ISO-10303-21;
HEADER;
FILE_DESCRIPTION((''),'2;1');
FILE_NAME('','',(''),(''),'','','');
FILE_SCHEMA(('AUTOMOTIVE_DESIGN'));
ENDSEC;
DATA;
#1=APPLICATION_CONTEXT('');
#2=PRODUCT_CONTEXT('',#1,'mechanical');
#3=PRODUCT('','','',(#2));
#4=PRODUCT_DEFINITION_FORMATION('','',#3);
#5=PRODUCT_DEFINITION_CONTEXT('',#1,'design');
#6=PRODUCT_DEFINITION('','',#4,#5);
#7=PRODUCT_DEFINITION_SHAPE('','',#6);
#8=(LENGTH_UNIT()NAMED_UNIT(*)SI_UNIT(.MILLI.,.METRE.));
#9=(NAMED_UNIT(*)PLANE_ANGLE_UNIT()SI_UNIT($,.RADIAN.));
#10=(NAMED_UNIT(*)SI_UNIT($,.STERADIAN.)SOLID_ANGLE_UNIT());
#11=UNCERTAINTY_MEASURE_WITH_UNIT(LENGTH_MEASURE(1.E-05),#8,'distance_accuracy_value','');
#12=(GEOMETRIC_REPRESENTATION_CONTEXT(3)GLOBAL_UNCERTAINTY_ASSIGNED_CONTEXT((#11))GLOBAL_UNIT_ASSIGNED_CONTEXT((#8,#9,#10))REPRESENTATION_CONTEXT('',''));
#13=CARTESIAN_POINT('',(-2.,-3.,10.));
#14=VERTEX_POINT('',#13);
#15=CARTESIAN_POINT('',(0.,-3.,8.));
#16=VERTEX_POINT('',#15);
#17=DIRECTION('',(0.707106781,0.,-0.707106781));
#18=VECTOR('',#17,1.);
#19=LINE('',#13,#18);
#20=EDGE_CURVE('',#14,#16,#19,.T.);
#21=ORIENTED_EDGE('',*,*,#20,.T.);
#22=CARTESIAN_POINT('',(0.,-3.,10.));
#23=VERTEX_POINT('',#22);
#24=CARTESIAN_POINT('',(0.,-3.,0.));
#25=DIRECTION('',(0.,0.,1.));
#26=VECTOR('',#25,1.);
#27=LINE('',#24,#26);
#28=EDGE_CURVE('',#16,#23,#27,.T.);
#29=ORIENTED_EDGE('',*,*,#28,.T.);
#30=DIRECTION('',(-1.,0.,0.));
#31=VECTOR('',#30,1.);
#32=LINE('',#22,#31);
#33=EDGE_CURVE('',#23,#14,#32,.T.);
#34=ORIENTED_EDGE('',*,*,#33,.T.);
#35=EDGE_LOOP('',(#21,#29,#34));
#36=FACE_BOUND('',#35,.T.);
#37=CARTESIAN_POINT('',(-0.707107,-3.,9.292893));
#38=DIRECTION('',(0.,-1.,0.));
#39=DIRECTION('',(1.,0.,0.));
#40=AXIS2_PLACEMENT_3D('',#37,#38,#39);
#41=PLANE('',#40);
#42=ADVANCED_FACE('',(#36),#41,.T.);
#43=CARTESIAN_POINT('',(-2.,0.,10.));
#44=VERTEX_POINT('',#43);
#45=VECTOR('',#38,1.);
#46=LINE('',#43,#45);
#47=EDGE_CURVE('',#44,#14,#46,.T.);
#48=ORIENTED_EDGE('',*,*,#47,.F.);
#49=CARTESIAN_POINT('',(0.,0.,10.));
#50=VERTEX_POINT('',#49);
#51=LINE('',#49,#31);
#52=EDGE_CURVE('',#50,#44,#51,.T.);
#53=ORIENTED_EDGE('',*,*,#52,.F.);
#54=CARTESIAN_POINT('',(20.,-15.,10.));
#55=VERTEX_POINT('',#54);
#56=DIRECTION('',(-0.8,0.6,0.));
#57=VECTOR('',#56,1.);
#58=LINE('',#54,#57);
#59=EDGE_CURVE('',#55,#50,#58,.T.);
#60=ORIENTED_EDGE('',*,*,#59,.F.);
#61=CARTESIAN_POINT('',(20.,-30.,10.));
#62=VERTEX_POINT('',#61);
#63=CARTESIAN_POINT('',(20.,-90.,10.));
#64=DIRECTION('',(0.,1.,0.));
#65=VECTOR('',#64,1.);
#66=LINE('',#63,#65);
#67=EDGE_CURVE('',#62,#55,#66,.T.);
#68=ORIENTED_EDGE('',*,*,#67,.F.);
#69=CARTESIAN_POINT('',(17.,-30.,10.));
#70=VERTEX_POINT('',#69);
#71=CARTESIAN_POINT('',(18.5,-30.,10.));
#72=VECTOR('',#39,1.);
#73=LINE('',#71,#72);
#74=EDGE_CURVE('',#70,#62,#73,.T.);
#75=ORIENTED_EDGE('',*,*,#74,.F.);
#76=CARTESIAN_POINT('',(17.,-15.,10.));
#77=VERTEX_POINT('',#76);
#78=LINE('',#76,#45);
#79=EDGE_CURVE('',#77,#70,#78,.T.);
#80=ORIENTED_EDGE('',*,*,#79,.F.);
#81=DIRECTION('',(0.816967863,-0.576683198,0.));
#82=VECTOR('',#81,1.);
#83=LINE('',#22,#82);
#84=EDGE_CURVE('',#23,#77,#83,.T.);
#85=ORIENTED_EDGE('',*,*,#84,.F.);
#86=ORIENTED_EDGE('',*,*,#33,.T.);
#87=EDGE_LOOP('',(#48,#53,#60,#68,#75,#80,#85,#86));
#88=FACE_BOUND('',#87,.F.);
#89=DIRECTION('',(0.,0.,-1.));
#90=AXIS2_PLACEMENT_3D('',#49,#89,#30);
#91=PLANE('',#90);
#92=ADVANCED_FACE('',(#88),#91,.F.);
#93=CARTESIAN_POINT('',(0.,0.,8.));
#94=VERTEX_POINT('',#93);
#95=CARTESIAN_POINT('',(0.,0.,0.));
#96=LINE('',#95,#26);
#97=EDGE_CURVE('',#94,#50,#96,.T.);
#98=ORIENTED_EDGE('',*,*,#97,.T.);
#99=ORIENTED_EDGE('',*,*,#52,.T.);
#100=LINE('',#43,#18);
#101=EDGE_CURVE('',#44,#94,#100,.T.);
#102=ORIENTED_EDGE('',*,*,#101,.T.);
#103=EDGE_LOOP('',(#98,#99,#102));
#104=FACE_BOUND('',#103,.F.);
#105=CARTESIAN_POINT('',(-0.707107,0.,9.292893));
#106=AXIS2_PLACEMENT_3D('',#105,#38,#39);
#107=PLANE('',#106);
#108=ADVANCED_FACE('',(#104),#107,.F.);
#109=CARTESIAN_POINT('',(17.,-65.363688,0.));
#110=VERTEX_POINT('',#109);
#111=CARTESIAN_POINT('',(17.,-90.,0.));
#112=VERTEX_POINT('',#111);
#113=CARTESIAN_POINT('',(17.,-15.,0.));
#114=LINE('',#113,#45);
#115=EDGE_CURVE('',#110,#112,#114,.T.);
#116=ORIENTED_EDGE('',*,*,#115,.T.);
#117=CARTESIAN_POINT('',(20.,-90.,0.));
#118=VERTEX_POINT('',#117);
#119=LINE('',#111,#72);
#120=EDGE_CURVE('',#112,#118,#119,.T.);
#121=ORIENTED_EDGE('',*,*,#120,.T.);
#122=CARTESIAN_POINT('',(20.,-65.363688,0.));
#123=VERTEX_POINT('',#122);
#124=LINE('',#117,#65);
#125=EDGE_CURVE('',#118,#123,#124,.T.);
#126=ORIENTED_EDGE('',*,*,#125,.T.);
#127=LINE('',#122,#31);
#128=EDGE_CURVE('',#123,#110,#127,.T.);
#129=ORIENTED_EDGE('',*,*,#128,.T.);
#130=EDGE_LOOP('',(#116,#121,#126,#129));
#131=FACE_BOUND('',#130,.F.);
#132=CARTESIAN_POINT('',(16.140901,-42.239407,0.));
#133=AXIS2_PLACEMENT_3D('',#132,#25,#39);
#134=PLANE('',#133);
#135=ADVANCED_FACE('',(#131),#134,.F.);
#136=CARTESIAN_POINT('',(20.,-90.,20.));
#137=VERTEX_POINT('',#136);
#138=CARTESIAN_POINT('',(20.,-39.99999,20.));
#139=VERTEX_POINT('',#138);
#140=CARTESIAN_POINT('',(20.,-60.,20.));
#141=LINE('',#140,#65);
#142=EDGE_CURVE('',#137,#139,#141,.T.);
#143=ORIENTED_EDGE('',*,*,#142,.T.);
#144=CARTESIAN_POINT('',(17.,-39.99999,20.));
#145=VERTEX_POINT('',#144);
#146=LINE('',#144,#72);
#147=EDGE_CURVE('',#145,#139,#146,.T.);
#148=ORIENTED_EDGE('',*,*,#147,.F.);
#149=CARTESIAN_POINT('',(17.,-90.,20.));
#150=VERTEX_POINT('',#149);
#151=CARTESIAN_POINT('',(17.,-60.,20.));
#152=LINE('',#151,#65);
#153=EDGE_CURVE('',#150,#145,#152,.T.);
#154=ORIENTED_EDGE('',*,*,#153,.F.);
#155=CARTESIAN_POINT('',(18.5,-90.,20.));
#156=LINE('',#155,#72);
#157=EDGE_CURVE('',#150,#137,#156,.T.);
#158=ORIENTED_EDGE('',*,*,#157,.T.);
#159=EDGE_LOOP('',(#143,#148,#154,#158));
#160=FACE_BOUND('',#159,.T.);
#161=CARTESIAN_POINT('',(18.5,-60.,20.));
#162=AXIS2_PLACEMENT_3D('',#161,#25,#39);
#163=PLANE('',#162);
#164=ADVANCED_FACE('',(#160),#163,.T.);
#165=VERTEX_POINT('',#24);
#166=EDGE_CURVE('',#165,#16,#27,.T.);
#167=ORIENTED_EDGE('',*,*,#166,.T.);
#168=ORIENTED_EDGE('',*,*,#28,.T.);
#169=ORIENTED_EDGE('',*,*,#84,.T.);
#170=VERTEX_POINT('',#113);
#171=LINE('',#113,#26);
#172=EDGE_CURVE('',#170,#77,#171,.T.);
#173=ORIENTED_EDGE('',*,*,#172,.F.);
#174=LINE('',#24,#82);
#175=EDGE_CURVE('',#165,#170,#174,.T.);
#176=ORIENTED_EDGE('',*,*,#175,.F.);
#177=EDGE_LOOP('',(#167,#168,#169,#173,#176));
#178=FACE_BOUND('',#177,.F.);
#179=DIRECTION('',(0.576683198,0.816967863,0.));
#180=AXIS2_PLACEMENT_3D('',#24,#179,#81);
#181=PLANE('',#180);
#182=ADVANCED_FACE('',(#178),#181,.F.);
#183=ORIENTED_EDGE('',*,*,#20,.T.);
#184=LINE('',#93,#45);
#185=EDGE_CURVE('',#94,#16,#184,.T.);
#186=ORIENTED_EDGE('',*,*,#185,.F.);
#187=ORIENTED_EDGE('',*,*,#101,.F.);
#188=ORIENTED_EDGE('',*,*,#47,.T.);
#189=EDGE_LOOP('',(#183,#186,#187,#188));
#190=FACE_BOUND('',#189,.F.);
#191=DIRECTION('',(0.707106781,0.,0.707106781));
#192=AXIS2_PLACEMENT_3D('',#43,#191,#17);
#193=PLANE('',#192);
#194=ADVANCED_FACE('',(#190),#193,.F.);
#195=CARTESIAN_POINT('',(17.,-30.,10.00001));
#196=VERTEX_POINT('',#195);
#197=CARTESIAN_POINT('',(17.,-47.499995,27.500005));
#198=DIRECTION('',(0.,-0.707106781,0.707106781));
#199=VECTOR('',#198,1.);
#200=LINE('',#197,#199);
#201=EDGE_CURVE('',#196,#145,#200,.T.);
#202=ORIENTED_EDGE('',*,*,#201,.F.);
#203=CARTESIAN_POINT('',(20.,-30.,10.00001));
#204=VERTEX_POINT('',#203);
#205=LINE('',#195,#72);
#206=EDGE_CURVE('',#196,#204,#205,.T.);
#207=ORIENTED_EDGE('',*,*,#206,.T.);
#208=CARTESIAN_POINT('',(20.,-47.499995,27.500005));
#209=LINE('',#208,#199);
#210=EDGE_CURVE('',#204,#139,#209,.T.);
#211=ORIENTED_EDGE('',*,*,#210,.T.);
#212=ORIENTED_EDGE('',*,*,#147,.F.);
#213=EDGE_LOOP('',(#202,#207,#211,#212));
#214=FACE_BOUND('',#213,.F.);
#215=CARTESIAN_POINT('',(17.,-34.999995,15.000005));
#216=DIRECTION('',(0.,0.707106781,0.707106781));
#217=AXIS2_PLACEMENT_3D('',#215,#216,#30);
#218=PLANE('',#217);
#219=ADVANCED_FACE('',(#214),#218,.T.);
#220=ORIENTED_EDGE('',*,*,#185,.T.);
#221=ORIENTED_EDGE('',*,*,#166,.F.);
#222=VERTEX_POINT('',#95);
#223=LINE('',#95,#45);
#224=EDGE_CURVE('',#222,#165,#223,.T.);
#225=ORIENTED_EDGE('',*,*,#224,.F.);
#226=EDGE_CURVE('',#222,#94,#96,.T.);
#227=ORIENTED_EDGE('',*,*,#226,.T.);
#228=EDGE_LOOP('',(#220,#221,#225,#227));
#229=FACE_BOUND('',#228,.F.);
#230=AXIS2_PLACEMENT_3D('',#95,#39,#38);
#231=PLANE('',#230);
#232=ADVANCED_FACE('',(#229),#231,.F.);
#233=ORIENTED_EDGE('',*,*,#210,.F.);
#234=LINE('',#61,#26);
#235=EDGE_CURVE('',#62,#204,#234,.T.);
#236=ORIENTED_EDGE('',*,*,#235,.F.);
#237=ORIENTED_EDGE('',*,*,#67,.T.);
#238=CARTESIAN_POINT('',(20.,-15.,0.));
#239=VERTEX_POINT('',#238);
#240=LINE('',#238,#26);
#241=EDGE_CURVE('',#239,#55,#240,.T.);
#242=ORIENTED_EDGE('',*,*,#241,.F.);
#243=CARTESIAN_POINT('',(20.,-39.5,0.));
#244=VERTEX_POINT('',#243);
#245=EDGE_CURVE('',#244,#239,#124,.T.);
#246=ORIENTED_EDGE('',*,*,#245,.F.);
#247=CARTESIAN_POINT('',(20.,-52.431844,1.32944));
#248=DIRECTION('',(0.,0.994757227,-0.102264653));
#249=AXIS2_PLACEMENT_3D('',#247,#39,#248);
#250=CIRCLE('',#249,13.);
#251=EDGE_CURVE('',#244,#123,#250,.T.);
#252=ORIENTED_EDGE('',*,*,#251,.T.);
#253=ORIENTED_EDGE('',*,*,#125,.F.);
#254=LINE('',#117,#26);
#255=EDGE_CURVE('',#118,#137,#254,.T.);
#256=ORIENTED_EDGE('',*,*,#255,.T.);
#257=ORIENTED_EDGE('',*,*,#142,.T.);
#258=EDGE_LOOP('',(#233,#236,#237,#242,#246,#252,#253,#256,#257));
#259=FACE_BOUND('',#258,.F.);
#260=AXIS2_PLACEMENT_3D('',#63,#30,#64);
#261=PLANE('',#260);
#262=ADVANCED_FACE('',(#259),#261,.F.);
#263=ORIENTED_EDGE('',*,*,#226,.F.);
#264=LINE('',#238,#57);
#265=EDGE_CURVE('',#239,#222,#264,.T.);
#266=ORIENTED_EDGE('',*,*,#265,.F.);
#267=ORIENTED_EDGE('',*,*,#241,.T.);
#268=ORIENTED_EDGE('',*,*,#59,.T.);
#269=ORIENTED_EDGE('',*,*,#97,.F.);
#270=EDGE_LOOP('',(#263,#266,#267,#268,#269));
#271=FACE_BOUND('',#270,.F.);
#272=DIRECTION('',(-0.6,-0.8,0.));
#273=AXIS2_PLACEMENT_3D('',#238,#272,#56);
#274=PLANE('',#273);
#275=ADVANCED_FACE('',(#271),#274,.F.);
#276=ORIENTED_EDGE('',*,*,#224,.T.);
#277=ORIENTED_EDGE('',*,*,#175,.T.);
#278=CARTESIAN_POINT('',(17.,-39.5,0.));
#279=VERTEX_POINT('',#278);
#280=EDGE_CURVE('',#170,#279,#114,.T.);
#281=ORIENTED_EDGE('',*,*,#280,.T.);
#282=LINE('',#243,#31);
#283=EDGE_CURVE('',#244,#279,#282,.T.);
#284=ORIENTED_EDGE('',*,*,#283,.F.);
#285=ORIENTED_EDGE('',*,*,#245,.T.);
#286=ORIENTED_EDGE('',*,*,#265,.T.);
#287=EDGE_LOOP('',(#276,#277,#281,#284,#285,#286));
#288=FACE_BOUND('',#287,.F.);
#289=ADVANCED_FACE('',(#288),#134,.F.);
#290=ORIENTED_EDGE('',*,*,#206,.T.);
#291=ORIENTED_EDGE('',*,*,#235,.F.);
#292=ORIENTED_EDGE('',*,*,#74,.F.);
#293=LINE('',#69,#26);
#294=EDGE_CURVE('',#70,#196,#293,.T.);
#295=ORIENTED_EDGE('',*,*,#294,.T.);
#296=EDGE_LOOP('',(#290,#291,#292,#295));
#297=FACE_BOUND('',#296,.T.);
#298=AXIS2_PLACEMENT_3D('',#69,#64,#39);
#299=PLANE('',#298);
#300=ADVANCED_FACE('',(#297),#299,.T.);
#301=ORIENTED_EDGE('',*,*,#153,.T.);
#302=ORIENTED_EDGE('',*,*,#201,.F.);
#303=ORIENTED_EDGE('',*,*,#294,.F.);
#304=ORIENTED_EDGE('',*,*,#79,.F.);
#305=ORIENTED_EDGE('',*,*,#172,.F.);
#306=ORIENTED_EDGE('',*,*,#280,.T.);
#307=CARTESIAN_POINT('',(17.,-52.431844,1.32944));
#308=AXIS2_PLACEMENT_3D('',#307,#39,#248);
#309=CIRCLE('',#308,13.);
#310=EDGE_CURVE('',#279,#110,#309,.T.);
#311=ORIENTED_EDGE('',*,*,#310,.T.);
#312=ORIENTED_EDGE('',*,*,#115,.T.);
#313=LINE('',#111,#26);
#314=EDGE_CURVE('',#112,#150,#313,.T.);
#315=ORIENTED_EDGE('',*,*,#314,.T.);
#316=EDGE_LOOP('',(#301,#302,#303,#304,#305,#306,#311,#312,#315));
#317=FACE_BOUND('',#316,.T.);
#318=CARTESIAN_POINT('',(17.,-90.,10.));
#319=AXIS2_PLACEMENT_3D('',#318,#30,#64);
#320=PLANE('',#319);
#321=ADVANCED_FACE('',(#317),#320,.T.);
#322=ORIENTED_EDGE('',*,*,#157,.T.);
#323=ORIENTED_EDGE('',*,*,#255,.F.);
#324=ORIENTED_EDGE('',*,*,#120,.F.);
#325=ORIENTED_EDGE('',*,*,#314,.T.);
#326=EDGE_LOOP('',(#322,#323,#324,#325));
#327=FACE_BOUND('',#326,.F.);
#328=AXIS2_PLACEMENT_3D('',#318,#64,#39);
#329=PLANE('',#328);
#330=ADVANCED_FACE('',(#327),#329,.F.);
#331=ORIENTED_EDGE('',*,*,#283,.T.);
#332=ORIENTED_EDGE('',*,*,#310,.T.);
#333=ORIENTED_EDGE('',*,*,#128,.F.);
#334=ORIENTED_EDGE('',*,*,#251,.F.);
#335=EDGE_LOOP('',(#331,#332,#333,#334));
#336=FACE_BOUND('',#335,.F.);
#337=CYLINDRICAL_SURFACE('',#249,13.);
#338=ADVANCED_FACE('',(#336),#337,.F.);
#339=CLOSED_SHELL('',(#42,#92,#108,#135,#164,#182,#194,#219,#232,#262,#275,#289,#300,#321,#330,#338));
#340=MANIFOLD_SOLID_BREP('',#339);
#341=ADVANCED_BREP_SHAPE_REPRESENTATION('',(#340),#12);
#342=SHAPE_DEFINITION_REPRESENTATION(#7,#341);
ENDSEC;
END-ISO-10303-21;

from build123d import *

# Parameters (mm, degrees)
F1_DEPTH = 10
F3_DEPTH = 3
F4_W     = 3
F4_H     = 60
F5_DEPTH = 10
F6_SIZE  = 9.99999
F8_DEPTH = 25


# Not quite as in the source:
# - a fillet or chamfer is up to 0.001 mm smaller than in the source, because OpenCascade refuses the exact size


with BuildPart() as f1:
    # F0 (on Top) → F1 (new body)
    with BuildSketch(Plane.XY):
        Polygon((20, -15), (0, 0), (0, -3), (17, -15), (17, -90), (20, -90), align=None)
    extrude(amount=F1_DEPTH)

    # F2 (on Front) → F3 (join)
    with BuildSketch(Plane.XZ):
        Polygon((0, 8), (0, 10), (-2, 10), align=None)
    extrude(amount=F3_DEPTH)

    # F4 (on face) → F5 (join)
    with BuildSketch(Plane.XY.offset(10)):
        with Locations((18.5, -60)):
            Rectangle(F4_W, F4_H)
    extrude(amount=F5_DEPTH)

    # F6 (size 10 in the source; OpenCascade refuses exactly that, so slightly less here)
    f6_edges = [f1.edges().sort_by_distance(p)[0] for p in [
        (18.5, -30, 20),
    ]]
    chamfer(f6_edges, length=F6_SIZE)

    # F7 (on face) → F8 (cut)
    with BuildSketch(Plane.YZ.offset(20)):
        with BuildLine():
            Line((-65.3636879024, 0), (-39.5, 0))
            ThreePointArc((-39.5, 0), (-52.4318439512, 14.3294404922), (-65.3636879024, 0))
        make_face()
    extrude(amount=-F8_DEPTH, mode=Mode.SUBTRACT)


solid = f1.part
